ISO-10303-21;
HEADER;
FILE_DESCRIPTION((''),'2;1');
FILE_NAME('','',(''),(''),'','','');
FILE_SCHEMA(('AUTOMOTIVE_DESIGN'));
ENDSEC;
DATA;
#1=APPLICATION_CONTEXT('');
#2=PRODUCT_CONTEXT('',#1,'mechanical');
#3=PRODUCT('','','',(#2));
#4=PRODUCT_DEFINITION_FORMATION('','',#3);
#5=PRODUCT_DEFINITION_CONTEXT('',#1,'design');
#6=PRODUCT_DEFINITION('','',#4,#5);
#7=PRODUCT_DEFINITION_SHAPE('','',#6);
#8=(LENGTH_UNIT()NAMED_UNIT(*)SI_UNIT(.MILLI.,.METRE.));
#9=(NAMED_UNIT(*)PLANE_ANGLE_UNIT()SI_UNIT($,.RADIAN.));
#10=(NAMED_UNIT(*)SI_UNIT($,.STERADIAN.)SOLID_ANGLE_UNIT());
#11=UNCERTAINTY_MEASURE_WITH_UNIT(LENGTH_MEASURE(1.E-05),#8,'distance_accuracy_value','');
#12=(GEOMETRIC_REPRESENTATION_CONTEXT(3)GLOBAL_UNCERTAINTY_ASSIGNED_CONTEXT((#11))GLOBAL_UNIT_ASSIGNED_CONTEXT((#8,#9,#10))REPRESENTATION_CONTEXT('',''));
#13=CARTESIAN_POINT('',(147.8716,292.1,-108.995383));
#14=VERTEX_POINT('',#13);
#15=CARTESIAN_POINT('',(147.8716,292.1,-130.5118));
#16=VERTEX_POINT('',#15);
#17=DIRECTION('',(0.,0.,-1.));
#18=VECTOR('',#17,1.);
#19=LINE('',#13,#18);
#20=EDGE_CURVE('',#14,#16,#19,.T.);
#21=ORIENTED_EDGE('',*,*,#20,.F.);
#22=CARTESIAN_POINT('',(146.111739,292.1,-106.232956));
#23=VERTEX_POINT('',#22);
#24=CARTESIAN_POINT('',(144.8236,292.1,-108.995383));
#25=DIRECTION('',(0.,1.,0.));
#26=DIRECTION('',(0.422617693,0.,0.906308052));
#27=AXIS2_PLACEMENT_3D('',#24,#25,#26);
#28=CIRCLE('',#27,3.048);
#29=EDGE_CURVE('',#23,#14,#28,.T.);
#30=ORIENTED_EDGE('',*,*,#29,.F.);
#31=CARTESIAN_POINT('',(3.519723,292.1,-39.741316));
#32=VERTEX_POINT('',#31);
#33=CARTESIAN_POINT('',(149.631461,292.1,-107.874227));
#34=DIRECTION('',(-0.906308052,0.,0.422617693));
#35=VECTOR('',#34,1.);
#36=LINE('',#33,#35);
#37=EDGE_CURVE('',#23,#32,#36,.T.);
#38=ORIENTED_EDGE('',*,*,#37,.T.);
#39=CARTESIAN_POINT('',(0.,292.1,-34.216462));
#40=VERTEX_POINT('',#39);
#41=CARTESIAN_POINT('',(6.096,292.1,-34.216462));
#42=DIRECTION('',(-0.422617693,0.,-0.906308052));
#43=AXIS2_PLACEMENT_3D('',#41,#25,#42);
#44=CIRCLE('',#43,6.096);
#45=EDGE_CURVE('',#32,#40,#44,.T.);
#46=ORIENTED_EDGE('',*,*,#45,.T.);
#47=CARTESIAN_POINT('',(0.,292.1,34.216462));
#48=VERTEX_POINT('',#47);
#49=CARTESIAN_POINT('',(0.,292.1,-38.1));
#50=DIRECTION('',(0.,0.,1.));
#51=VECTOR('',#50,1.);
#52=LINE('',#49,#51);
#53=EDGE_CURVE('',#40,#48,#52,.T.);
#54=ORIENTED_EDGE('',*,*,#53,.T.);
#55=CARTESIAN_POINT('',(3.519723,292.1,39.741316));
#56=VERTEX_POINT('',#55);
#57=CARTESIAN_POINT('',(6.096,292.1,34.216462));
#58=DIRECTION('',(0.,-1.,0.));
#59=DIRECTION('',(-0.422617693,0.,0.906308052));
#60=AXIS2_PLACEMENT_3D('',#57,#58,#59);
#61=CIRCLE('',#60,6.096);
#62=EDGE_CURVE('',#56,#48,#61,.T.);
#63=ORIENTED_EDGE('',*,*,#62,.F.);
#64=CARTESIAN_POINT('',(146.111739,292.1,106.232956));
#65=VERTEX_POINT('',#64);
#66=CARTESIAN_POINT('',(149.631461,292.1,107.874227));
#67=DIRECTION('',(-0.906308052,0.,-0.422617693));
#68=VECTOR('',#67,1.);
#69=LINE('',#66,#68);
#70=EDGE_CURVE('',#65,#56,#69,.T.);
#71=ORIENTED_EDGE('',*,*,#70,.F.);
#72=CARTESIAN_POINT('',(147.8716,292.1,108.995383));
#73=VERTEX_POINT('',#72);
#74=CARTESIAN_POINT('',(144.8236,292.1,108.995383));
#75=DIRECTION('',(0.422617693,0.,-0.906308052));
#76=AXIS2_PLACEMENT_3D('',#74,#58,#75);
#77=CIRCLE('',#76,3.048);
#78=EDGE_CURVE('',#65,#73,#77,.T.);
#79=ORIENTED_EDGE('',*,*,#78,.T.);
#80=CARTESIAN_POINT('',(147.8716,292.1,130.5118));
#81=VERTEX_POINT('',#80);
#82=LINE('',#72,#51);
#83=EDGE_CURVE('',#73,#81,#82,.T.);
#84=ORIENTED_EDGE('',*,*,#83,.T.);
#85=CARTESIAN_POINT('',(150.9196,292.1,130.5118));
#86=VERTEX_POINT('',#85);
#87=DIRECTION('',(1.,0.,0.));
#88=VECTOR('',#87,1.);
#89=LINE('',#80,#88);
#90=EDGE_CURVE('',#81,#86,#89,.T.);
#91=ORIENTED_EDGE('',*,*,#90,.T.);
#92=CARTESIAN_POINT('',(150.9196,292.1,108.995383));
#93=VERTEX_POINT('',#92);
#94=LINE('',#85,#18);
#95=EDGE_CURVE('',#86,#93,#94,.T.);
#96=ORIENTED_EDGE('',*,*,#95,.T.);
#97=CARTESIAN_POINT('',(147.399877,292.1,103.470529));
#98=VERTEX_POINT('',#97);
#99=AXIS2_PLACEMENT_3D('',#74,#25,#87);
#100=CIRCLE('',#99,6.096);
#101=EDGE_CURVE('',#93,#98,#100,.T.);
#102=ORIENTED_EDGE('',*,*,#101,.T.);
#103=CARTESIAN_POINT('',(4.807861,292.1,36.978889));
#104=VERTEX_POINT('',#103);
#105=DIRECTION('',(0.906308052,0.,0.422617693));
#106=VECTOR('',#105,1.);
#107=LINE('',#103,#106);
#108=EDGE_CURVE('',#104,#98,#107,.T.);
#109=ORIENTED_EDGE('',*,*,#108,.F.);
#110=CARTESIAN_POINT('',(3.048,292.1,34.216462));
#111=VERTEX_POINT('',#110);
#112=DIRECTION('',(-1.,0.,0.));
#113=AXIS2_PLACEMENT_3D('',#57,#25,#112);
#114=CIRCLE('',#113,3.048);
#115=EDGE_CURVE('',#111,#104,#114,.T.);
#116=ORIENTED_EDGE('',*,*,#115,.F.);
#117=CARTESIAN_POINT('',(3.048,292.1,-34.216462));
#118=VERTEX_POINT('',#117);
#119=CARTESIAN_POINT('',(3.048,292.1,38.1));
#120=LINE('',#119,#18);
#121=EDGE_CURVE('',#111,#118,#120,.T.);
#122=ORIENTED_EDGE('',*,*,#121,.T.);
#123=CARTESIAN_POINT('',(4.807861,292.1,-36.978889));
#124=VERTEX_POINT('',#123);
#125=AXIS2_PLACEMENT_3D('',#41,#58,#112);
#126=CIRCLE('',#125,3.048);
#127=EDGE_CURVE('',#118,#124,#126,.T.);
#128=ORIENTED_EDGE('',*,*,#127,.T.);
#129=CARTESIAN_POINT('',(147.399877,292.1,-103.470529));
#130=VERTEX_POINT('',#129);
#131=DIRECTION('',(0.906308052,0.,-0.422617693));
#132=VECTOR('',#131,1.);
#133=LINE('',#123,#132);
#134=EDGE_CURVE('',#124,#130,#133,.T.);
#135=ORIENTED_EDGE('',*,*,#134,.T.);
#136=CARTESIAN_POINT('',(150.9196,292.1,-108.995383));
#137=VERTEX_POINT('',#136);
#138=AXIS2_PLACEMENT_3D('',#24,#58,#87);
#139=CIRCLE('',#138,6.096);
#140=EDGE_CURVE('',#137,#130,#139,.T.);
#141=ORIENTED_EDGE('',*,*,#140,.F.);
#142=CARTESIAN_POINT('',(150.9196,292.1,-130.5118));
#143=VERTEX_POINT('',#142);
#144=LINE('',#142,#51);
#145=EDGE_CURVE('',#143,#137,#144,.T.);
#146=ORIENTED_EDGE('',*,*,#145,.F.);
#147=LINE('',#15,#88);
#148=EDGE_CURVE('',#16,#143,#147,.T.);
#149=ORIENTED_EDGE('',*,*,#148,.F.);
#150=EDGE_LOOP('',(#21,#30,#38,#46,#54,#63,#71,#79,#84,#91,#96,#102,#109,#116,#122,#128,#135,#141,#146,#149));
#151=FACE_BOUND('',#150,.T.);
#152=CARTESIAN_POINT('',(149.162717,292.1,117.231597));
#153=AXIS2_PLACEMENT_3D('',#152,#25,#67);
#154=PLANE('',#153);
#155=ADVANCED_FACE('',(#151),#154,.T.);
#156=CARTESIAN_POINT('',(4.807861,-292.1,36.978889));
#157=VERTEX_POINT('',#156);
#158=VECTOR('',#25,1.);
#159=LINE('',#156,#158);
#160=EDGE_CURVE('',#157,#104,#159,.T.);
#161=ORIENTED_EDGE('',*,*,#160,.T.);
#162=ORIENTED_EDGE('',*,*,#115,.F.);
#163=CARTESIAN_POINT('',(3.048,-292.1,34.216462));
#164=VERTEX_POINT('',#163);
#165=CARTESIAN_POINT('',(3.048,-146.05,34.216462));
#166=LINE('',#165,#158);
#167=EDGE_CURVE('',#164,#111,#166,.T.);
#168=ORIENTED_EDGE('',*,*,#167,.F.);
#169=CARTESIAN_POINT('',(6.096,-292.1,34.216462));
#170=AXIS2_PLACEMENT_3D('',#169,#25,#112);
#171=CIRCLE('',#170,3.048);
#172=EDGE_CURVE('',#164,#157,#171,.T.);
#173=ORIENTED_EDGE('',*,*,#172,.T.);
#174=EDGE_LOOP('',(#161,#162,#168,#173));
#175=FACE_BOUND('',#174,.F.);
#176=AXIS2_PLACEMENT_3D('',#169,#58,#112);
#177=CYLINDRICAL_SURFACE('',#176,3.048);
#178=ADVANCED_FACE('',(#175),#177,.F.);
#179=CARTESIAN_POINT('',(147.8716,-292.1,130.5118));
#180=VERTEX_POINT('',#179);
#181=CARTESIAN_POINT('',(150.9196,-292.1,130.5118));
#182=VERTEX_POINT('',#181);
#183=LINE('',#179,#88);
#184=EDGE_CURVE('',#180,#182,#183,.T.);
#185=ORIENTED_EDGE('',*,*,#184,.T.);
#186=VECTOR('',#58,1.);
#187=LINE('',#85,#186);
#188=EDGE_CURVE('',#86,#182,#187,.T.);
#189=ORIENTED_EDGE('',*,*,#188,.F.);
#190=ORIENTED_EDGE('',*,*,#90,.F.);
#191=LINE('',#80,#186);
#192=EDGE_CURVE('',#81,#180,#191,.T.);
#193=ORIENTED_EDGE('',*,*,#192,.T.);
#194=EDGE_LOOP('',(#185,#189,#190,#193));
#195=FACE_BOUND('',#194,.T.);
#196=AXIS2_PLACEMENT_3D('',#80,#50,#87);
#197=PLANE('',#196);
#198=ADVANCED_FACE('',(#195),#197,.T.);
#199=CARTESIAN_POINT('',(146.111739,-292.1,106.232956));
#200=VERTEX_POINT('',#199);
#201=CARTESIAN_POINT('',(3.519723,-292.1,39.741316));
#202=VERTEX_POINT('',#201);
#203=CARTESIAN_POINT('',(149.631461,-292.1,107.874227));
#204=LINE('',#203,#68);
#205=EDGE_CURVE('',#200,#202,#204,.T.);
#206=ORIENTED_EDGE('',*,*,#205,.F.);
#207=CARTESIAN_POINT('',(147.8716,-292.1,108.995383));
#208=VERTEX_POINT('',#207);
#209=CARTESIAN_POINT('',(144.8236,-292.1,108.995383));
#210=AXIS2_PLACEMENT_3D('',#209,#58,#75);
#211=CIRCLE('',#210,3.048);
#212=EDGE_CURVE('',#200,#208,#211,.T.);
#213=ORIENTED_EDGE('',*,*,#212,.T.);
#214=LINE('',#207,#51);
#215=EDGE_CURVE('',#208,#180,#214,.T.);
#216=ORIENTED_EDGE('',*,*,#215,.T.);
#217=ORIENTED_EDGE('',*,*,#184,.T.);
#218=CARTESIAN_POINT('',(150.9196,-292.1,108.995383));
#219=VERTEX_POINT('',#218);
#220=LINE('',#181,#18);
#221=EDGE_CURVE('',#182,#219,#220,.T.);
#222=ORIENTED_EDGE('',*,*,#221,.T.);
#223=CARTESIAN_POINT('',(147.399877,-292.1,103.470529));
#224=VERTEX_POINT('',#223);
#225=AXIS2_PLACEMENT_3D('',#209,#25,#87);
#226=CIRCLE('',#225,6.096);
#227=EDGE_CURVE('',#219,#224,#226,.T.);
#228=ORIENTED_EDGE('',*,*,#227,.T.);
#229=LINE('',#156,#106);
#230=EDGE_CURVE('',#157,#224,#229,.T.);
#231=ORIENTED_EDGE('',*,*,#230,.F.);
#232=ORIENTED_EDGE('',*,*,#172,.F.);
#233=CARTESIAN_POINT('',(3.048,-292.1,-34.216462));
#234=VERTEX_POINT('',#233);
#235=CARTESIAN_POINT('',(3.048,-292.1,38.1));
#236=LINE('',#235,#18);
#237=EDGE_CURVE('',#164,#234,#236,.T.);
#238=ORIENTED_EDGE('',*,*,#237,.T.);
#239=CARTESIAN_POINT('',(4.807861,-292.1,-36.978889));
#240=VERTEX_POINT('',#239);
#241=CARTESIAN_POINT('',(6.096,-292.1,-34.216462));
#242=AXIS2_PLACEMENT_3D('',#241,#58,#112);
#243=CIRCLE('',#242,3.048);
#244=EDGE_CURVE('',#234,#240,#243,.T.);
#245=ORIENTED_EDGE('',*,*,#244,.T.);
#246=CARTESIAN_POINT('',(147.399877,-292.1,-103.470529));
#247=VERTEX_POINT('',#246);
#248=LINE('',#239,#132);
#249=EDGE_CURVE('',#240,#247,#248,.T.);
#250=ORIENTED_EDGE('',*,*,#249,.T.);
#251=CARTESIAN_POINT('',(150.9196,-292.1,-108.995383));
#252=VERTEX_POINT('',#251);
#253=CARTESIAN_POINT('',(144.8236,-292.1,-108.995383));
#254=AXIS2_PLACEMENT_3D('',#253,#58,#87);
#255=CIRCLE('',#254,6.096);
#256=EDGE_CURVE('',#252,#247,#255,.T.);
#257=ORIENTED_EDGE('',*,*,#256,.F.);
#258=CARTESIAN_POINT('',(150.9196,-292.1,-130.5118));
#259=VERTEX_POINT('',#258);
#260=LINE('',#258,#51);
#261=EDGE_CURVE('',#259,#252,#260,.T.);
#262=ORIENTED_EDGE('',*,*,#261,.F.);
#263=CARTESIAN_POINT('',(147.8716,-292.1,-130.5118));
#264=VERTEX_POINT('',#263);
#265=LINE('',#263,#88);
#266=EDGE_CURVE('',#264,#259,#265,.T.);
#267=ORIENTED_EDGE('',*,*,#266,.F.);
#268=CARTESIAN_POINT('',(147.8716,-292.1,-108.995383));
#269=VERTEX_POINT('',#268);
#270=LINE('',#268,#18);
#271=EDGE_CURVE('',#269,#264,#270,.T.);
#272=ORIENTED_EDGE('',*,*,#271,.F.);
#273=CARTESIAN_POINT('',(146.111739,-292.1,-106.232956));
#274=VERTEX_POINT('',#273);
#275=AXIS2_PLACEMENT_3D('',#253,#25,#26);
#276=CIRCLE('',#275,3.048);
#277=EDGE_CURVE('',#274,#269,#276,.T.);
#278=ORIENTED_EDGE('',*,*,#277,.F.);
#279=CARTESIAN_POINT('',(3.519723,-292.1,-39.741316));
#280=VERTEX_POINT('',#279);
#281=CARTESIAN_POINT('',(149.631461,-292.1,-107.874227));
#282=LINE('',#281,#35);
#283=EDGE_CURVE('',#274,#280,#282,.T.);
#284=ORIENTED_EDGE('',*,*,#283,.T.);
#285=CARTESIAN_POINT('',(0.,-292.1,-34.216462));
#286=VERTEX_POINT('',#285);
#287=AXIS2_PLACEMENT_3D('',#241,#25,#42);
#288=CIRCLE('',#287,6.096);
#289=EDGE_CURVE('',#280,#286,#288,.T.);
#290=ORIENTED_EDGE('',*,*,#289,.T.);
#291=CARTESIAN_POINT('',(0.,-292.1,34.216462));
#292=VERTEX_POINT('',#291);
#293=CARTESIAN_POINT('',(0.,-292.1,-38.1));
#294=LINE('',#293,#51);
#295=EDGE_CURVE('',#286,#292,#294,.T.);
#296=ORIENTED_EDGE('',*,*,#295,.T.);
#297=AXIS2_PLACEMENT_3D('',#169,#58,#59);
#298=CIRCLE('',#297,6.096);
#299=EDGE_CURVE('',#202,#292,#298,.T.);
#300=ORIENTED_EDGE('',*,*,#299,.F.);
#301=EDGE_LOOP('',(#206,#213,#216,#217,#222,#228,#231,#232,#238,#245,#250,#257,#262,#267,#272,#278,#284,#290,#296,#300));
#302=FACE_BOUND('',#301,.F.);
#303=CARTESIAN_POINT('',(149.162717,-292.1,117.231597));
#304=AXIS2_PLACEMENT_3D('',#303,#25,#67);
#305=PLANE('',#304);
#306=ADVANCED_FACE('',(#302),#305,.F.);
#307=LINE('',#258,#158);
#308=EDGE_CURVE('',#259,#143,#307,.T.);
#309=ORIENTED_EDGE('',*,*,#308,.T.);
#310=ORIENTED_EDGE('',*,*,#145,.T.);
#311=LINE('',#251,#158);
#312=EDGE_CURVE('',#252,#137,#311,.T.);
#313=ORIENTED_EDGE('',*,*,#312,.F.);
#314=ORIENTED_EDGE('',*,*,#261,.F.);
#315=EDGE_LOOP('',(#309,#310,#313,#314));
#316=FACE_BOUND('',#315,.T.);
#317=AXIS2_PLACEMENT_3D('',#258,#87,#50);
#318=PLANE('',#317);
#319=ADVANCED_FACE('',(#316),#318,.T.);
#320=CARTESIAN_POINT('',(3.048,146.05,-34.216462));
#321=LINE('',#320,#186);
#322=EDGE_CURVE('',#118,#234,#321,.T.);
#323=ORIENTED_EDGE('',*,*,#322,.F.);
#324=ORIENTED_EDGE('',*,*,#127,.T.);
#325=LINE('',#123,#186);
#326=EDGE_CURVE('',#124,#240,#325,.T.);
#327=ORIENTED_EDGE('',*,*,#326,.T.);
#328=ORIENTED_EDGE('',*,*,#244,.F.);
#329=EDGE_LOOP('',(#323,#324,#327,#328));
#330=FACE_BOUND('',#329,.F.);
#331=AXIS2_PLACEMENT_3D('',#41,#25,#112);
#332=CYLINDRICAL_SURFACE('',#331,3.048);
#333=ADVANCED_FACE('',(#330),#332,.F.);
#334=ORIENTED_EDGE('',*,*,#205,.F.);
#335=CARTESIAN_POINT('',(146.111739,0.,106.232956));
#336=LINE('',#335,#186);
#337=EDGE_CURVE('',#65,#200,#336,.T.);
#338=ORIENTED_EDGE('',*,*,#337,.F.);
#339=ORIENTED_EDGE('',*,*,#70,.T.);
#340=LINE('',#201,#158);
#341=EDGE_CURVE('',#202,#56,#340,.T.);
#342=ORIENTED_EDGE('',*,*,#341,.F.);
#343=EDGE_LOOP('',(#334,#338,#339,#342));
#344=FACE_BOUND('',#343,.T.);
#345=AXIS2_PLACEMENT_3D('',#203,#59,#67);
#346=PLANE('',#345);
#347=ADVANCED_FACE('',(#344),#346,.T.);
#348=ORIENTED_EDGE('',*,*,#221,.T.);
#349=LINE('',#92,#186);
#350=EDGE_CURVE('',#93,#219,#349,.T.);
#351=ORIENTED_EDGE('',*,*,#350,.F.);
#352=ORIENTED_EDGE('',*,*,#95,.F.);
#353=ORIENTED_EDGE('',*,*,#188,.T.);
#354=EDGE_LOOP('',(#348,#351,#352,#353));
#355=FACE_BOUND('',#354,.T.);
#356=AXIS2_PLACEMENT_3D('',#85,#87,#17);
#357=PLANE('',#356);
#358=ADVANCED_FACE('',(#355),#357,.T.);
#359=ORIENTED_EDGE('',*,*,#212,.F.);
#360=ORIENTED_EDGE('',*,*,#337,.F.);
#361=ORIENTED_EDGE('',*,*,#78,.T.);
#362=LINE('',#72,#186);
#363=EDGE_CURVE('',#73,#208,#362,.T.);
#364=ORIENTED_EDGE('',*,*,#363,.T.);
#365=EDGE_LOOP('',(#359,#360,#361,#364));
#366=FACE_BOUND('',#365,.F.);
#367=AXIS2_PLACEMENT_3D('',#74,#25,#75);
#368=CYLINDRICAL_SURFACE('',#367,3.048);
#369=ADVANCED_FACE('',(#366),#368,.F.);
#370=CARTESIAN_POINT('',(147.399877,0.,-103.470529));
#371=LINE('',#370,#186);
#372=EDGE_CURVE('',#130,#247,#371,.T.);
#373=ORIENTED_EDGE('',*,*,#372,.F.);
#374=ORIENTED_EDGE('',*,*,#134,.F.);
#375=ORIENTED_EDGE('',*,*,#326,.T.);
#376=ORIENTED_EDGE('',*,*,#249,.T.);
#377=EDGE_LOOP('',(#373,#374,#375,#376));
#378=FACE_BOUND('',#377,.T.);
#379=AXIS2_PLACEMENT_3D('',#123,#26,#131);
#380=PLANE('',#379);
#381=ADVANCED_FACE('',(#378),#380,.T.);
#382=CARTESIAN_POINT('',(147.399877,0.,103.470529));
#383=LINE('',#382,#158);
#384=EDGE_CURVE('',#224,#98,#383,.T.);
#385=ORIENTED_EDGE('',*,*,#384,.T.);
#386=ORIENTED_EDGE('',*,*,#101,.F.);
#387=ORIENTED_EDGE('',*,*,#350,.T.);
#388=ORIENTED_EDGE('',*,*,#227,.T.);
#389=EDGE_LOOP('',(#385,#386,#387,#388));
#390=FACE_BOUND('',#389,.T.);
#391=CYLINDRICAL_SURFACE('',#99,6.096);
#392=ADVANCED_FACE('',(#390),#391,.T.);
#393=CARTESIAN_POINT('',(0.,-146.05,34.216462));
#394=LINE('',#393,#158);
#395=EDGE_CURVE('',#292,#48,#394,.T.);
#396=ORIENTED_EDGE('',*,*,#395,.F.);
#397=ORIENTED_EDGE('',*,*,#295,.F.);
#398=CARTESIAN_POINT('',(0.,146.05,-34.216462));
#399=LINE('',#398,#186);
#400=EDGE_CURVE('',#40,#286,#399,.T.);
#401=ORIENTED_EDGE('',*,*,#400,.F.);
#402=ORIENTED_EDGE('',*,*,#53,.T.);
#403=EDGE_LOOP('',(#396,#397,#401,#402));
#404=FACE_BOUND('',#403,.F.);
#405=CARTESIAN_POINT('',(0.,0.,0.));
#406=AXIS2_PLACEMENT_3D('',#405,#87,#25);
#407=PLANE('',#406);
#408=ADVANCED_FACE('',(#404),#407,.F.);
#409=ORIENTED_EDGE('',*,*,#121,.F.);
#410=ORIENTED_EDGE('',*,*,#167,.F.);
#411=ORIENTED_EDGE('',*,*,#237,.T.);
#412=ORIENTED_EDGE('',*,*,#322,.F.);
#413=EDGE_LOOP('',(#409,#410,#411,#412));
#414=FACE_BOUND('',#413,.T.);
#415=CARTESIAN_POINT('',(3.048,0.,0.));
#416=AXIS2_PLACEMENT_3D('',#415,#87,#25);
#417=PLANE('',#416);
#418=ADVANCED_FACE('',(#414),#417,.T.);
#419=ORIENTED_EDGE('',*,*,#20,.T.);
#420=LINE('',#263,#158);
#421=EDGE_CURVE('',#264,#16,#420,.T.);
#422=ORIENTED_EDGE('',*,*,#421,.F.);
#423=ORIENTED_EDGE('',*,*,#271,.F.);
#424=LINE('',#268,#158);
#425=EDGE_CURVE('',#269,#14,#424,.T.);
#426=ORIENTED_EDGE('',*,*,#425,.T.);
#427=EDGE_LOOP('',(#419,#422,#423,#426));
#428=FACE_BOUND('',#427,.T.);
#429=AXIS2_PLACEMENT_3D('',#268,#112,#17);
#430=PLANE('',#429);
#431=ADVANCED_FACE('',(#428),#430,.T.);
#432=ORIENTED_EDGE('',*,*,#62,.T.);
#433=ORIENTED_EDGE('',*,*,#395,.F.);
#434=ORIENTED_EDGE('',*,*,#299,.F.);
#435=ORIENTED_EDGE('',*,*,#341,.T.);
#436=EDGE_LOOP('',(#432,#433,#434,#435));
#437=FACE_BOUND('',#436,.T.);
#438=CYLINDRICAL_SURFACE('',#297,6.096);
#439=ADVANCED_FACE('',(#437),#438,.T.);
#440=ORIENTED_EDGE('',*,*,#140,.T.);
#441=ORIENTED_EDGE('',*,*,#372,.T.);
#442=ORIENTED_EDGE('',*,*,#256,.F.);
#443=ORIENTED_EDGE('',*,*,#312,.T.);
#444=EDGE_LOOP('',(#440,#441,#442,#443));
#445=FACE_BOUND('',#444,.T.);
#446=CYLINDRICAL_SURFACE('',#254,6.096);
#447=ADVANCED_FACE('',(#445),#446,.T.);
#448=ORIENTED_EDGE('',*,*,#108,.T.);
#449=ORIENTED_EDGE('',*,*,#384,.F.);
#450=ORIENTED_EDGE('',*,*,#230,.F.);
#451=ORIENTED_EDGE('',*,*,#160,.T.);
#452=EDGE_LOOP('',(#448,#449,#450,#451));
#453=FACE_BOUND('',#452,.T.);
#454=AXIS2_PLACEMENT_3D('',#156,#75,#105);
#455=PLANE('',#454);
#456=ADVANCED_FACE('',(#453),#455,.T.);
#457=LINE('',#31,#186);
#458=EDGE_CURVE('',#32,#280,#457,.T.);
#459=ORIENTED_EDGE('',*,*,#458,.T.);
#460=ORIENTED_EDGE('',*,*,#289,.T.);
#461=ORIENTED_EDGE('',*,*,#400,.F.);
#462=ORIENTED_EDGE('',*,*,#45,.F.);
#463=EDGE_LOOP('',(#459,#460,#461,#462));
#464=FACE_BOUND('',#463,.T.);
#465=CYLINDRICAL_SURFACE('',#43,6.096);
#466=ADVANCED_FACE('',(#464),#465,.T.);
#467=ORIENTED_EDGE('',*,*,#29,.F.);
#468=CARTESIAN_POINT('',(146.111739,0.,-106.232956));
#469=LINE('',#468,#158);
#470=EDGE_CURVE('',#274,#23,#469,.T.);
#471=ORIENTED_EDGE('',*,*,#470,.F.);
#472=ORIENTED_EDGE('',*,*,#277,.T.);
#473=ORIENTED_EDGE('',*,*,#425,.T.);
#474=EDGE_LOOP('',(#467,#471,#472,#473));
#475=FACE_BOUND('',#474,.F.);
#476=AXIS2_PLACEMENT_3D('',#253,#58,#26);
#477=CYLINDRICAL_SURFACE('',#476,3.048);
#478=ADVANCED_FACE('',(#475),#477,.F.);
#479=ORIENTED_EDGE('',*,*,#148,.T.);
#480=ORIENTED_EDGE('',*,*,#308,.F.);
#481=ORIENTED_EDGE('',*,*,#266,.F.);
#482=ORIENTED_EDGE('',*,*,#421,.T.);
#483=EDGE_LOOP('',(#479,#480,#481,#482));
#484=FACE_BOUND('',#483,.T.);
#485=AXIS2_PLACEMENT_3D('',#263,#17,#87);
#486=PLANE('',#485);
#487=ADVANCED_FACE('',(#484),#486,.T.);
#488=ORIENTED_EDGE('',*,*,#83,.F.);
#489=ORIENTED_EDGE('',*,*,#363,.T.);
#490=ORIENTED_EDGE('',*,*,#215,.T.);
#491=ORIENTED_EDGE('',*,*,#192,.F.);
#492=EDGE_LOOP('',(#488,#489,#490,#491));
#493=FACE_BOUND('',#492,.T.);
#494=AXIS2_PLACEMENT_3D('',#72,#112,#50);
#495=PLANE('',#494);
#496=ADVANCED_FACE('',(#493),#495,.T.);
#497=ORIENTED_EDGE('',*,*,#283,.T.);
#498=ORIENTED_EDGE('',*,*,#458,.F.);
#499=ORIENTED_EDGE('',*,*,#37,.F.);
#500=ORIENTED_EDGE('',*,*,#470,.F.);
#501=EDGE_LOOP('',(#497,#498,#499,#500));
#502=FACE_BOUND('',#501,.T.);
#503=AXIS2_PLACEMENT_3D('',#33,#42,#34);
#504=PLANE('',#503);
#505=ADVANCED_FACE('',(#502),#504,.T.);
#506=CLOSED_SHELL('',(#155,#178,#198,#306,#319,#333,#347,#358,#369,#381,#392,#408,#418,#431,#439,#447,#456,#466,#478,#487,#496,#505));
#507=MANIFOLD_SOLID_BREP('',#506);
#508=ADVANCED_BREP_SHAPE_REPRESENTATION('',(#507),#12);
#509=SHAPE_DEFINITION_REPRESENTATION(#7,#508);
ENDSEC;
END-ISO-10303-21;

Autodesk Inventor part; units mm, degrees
ref_plane "YZ Plane" through (0, 0, 0) normal (1, 0, 0) x (0, 1, 0)
ref_plane "XZ Plane" through (0, 0, 0) normal (0, 1, 0) x (-1, 0, 0)
ref_plane "XY Plane" through (0, 0, 0) normal (0, 0, 1) x (1, 0, 0)
sketch "Sketch1" plane through (0, 0, 0) normal (1, 0, 0) x (0, 1, 0)
  line L0 (292.1, 38.1) -> (-292.1, 38.1)
  line L1 (-292.1, 38.1) -> (-292.1, -38.1)
  line L2 (-292.1, -38.1) -> (292.1, -38.1)
  line L3 (292.1, -38.1) -> (292.1, 38.1)
  line L4 (-408.94, 0) -> (408.94, 0)
  line L5 (0, -53.34) -> (0, 53.34)
  point P0 (0, 0)
  dimension "d0" = 76.2
  dimension "d1" = 584.2
extrude "Plate1" add sketch "Sketch1" along normal blind 3.048
sketch "Sketch2" plane through (1.2881, 292.1, -35.3376) normal (-0.4226183, 0, -0.9063078) x (0, -1, 0)
  line L0 (584.2, 0) -> (0, 0)
  line L1 (0, 0) -> (0, -165.1)
  line L2 (0, -165.1) -> (584.2, -165.1)
  line L3 (584.2, -165.1) -> (584.2, 0)
edge flange "Flange1" height 165.1 angle 65 thickness 3.048 bend radius 3.048 thickness toward (-0.4226183, 0, -0.9063078) relief tear relief width 3.048 relief depth 1.524 corner gap 3.048 corner form 0 edges at (3.048, 0, -38.1) (3.048, 0, 38.1) wall of the first edge with corners at (1.2881, -292.1, -35.3376) (1.2881, 292.1, -35.3376) (150.9196, 292.1, -105.1118) (150.9196, -292.1, -105.1118)
bend "Bend1"
corner "Corner1"
sketch "Sketch3" plane through (147.8716, 292.1, 105.1118) normal (1, 0, 0) x (0, 1, 0)
  line L0 (-584.2, 0) -> (0, 0)
  line L1 (0, 0) -> (0, 25.4)
  line L2 (0, 25.4) -> (-584.2, 25.4)
  line L3 (-584.2, 25.4) -> (-584.2, 0)
edge flange "Flange2" height 25.4 angle 65 thickness 3.048 bend radius 3.048 thickness toward (1, 0, 0) relief tear relief width 3.048 relief depth 1.524 corner gap 3.048 corner form 0 edges at (149.6314, 0, 107.8743) (149.6314, 0, -107.8743) wall of the first edge with corners at (147.8716, -292.1, 105.1118) (147.8716, 292.1, 105.1118) (147.8716, 292.1, 130.5118) (147.8716, -292.1, 130.5118)
bend "Bend2"
corner "Corner2"
equation "\"d3\" = BendReliefWidth"
equation "\"d4\" = BendReliefDepth"
equation "\"d5\" = MinimumRemnant"
equation "\"d6\" = BendRadius"
equation "\"d9\" = BendRadius"
equation "\"d10\" = CornerReliefSize"
equation "\"d11\" = GapSize"
equation "\"d12\" = JacobiRadiusSize"
equation "\"d13\" = BendReliefWidth"
equation "\"d14\" = BendReliefDepth"
equation "\"d15\" = MinimumRemnant"
equation "\"d16\" = BendRadius"
equation "\"d19\" = BendRadius"
equation "\"d20\" = CornerReliefSize"
equation "\"d21\" = GapSize"
equation "\"d22\" = JacobiRadiusSize"
equation "\"BendRadius\" = Thickness"
equation "\"BendReliefWidth\" = Thickness"
equation "\"BendReliefDepth\" = 0.5 * Thickness"
equation "\"CornerReliefSize\" = 4 * Thickness"
equation "\"MinimumRemnant\" = 2 * Thickness"
equation "\"TransitionRadius\" = BendRadius"
equation "\"JacobiRadiusSize\" = BendRadius"
equation "\"GapSize\" = Thickness"
equation "\"d2\" = BendRadius"
equation "\"Thickness\" = 3.048"
properties part number "Bread Pan"
